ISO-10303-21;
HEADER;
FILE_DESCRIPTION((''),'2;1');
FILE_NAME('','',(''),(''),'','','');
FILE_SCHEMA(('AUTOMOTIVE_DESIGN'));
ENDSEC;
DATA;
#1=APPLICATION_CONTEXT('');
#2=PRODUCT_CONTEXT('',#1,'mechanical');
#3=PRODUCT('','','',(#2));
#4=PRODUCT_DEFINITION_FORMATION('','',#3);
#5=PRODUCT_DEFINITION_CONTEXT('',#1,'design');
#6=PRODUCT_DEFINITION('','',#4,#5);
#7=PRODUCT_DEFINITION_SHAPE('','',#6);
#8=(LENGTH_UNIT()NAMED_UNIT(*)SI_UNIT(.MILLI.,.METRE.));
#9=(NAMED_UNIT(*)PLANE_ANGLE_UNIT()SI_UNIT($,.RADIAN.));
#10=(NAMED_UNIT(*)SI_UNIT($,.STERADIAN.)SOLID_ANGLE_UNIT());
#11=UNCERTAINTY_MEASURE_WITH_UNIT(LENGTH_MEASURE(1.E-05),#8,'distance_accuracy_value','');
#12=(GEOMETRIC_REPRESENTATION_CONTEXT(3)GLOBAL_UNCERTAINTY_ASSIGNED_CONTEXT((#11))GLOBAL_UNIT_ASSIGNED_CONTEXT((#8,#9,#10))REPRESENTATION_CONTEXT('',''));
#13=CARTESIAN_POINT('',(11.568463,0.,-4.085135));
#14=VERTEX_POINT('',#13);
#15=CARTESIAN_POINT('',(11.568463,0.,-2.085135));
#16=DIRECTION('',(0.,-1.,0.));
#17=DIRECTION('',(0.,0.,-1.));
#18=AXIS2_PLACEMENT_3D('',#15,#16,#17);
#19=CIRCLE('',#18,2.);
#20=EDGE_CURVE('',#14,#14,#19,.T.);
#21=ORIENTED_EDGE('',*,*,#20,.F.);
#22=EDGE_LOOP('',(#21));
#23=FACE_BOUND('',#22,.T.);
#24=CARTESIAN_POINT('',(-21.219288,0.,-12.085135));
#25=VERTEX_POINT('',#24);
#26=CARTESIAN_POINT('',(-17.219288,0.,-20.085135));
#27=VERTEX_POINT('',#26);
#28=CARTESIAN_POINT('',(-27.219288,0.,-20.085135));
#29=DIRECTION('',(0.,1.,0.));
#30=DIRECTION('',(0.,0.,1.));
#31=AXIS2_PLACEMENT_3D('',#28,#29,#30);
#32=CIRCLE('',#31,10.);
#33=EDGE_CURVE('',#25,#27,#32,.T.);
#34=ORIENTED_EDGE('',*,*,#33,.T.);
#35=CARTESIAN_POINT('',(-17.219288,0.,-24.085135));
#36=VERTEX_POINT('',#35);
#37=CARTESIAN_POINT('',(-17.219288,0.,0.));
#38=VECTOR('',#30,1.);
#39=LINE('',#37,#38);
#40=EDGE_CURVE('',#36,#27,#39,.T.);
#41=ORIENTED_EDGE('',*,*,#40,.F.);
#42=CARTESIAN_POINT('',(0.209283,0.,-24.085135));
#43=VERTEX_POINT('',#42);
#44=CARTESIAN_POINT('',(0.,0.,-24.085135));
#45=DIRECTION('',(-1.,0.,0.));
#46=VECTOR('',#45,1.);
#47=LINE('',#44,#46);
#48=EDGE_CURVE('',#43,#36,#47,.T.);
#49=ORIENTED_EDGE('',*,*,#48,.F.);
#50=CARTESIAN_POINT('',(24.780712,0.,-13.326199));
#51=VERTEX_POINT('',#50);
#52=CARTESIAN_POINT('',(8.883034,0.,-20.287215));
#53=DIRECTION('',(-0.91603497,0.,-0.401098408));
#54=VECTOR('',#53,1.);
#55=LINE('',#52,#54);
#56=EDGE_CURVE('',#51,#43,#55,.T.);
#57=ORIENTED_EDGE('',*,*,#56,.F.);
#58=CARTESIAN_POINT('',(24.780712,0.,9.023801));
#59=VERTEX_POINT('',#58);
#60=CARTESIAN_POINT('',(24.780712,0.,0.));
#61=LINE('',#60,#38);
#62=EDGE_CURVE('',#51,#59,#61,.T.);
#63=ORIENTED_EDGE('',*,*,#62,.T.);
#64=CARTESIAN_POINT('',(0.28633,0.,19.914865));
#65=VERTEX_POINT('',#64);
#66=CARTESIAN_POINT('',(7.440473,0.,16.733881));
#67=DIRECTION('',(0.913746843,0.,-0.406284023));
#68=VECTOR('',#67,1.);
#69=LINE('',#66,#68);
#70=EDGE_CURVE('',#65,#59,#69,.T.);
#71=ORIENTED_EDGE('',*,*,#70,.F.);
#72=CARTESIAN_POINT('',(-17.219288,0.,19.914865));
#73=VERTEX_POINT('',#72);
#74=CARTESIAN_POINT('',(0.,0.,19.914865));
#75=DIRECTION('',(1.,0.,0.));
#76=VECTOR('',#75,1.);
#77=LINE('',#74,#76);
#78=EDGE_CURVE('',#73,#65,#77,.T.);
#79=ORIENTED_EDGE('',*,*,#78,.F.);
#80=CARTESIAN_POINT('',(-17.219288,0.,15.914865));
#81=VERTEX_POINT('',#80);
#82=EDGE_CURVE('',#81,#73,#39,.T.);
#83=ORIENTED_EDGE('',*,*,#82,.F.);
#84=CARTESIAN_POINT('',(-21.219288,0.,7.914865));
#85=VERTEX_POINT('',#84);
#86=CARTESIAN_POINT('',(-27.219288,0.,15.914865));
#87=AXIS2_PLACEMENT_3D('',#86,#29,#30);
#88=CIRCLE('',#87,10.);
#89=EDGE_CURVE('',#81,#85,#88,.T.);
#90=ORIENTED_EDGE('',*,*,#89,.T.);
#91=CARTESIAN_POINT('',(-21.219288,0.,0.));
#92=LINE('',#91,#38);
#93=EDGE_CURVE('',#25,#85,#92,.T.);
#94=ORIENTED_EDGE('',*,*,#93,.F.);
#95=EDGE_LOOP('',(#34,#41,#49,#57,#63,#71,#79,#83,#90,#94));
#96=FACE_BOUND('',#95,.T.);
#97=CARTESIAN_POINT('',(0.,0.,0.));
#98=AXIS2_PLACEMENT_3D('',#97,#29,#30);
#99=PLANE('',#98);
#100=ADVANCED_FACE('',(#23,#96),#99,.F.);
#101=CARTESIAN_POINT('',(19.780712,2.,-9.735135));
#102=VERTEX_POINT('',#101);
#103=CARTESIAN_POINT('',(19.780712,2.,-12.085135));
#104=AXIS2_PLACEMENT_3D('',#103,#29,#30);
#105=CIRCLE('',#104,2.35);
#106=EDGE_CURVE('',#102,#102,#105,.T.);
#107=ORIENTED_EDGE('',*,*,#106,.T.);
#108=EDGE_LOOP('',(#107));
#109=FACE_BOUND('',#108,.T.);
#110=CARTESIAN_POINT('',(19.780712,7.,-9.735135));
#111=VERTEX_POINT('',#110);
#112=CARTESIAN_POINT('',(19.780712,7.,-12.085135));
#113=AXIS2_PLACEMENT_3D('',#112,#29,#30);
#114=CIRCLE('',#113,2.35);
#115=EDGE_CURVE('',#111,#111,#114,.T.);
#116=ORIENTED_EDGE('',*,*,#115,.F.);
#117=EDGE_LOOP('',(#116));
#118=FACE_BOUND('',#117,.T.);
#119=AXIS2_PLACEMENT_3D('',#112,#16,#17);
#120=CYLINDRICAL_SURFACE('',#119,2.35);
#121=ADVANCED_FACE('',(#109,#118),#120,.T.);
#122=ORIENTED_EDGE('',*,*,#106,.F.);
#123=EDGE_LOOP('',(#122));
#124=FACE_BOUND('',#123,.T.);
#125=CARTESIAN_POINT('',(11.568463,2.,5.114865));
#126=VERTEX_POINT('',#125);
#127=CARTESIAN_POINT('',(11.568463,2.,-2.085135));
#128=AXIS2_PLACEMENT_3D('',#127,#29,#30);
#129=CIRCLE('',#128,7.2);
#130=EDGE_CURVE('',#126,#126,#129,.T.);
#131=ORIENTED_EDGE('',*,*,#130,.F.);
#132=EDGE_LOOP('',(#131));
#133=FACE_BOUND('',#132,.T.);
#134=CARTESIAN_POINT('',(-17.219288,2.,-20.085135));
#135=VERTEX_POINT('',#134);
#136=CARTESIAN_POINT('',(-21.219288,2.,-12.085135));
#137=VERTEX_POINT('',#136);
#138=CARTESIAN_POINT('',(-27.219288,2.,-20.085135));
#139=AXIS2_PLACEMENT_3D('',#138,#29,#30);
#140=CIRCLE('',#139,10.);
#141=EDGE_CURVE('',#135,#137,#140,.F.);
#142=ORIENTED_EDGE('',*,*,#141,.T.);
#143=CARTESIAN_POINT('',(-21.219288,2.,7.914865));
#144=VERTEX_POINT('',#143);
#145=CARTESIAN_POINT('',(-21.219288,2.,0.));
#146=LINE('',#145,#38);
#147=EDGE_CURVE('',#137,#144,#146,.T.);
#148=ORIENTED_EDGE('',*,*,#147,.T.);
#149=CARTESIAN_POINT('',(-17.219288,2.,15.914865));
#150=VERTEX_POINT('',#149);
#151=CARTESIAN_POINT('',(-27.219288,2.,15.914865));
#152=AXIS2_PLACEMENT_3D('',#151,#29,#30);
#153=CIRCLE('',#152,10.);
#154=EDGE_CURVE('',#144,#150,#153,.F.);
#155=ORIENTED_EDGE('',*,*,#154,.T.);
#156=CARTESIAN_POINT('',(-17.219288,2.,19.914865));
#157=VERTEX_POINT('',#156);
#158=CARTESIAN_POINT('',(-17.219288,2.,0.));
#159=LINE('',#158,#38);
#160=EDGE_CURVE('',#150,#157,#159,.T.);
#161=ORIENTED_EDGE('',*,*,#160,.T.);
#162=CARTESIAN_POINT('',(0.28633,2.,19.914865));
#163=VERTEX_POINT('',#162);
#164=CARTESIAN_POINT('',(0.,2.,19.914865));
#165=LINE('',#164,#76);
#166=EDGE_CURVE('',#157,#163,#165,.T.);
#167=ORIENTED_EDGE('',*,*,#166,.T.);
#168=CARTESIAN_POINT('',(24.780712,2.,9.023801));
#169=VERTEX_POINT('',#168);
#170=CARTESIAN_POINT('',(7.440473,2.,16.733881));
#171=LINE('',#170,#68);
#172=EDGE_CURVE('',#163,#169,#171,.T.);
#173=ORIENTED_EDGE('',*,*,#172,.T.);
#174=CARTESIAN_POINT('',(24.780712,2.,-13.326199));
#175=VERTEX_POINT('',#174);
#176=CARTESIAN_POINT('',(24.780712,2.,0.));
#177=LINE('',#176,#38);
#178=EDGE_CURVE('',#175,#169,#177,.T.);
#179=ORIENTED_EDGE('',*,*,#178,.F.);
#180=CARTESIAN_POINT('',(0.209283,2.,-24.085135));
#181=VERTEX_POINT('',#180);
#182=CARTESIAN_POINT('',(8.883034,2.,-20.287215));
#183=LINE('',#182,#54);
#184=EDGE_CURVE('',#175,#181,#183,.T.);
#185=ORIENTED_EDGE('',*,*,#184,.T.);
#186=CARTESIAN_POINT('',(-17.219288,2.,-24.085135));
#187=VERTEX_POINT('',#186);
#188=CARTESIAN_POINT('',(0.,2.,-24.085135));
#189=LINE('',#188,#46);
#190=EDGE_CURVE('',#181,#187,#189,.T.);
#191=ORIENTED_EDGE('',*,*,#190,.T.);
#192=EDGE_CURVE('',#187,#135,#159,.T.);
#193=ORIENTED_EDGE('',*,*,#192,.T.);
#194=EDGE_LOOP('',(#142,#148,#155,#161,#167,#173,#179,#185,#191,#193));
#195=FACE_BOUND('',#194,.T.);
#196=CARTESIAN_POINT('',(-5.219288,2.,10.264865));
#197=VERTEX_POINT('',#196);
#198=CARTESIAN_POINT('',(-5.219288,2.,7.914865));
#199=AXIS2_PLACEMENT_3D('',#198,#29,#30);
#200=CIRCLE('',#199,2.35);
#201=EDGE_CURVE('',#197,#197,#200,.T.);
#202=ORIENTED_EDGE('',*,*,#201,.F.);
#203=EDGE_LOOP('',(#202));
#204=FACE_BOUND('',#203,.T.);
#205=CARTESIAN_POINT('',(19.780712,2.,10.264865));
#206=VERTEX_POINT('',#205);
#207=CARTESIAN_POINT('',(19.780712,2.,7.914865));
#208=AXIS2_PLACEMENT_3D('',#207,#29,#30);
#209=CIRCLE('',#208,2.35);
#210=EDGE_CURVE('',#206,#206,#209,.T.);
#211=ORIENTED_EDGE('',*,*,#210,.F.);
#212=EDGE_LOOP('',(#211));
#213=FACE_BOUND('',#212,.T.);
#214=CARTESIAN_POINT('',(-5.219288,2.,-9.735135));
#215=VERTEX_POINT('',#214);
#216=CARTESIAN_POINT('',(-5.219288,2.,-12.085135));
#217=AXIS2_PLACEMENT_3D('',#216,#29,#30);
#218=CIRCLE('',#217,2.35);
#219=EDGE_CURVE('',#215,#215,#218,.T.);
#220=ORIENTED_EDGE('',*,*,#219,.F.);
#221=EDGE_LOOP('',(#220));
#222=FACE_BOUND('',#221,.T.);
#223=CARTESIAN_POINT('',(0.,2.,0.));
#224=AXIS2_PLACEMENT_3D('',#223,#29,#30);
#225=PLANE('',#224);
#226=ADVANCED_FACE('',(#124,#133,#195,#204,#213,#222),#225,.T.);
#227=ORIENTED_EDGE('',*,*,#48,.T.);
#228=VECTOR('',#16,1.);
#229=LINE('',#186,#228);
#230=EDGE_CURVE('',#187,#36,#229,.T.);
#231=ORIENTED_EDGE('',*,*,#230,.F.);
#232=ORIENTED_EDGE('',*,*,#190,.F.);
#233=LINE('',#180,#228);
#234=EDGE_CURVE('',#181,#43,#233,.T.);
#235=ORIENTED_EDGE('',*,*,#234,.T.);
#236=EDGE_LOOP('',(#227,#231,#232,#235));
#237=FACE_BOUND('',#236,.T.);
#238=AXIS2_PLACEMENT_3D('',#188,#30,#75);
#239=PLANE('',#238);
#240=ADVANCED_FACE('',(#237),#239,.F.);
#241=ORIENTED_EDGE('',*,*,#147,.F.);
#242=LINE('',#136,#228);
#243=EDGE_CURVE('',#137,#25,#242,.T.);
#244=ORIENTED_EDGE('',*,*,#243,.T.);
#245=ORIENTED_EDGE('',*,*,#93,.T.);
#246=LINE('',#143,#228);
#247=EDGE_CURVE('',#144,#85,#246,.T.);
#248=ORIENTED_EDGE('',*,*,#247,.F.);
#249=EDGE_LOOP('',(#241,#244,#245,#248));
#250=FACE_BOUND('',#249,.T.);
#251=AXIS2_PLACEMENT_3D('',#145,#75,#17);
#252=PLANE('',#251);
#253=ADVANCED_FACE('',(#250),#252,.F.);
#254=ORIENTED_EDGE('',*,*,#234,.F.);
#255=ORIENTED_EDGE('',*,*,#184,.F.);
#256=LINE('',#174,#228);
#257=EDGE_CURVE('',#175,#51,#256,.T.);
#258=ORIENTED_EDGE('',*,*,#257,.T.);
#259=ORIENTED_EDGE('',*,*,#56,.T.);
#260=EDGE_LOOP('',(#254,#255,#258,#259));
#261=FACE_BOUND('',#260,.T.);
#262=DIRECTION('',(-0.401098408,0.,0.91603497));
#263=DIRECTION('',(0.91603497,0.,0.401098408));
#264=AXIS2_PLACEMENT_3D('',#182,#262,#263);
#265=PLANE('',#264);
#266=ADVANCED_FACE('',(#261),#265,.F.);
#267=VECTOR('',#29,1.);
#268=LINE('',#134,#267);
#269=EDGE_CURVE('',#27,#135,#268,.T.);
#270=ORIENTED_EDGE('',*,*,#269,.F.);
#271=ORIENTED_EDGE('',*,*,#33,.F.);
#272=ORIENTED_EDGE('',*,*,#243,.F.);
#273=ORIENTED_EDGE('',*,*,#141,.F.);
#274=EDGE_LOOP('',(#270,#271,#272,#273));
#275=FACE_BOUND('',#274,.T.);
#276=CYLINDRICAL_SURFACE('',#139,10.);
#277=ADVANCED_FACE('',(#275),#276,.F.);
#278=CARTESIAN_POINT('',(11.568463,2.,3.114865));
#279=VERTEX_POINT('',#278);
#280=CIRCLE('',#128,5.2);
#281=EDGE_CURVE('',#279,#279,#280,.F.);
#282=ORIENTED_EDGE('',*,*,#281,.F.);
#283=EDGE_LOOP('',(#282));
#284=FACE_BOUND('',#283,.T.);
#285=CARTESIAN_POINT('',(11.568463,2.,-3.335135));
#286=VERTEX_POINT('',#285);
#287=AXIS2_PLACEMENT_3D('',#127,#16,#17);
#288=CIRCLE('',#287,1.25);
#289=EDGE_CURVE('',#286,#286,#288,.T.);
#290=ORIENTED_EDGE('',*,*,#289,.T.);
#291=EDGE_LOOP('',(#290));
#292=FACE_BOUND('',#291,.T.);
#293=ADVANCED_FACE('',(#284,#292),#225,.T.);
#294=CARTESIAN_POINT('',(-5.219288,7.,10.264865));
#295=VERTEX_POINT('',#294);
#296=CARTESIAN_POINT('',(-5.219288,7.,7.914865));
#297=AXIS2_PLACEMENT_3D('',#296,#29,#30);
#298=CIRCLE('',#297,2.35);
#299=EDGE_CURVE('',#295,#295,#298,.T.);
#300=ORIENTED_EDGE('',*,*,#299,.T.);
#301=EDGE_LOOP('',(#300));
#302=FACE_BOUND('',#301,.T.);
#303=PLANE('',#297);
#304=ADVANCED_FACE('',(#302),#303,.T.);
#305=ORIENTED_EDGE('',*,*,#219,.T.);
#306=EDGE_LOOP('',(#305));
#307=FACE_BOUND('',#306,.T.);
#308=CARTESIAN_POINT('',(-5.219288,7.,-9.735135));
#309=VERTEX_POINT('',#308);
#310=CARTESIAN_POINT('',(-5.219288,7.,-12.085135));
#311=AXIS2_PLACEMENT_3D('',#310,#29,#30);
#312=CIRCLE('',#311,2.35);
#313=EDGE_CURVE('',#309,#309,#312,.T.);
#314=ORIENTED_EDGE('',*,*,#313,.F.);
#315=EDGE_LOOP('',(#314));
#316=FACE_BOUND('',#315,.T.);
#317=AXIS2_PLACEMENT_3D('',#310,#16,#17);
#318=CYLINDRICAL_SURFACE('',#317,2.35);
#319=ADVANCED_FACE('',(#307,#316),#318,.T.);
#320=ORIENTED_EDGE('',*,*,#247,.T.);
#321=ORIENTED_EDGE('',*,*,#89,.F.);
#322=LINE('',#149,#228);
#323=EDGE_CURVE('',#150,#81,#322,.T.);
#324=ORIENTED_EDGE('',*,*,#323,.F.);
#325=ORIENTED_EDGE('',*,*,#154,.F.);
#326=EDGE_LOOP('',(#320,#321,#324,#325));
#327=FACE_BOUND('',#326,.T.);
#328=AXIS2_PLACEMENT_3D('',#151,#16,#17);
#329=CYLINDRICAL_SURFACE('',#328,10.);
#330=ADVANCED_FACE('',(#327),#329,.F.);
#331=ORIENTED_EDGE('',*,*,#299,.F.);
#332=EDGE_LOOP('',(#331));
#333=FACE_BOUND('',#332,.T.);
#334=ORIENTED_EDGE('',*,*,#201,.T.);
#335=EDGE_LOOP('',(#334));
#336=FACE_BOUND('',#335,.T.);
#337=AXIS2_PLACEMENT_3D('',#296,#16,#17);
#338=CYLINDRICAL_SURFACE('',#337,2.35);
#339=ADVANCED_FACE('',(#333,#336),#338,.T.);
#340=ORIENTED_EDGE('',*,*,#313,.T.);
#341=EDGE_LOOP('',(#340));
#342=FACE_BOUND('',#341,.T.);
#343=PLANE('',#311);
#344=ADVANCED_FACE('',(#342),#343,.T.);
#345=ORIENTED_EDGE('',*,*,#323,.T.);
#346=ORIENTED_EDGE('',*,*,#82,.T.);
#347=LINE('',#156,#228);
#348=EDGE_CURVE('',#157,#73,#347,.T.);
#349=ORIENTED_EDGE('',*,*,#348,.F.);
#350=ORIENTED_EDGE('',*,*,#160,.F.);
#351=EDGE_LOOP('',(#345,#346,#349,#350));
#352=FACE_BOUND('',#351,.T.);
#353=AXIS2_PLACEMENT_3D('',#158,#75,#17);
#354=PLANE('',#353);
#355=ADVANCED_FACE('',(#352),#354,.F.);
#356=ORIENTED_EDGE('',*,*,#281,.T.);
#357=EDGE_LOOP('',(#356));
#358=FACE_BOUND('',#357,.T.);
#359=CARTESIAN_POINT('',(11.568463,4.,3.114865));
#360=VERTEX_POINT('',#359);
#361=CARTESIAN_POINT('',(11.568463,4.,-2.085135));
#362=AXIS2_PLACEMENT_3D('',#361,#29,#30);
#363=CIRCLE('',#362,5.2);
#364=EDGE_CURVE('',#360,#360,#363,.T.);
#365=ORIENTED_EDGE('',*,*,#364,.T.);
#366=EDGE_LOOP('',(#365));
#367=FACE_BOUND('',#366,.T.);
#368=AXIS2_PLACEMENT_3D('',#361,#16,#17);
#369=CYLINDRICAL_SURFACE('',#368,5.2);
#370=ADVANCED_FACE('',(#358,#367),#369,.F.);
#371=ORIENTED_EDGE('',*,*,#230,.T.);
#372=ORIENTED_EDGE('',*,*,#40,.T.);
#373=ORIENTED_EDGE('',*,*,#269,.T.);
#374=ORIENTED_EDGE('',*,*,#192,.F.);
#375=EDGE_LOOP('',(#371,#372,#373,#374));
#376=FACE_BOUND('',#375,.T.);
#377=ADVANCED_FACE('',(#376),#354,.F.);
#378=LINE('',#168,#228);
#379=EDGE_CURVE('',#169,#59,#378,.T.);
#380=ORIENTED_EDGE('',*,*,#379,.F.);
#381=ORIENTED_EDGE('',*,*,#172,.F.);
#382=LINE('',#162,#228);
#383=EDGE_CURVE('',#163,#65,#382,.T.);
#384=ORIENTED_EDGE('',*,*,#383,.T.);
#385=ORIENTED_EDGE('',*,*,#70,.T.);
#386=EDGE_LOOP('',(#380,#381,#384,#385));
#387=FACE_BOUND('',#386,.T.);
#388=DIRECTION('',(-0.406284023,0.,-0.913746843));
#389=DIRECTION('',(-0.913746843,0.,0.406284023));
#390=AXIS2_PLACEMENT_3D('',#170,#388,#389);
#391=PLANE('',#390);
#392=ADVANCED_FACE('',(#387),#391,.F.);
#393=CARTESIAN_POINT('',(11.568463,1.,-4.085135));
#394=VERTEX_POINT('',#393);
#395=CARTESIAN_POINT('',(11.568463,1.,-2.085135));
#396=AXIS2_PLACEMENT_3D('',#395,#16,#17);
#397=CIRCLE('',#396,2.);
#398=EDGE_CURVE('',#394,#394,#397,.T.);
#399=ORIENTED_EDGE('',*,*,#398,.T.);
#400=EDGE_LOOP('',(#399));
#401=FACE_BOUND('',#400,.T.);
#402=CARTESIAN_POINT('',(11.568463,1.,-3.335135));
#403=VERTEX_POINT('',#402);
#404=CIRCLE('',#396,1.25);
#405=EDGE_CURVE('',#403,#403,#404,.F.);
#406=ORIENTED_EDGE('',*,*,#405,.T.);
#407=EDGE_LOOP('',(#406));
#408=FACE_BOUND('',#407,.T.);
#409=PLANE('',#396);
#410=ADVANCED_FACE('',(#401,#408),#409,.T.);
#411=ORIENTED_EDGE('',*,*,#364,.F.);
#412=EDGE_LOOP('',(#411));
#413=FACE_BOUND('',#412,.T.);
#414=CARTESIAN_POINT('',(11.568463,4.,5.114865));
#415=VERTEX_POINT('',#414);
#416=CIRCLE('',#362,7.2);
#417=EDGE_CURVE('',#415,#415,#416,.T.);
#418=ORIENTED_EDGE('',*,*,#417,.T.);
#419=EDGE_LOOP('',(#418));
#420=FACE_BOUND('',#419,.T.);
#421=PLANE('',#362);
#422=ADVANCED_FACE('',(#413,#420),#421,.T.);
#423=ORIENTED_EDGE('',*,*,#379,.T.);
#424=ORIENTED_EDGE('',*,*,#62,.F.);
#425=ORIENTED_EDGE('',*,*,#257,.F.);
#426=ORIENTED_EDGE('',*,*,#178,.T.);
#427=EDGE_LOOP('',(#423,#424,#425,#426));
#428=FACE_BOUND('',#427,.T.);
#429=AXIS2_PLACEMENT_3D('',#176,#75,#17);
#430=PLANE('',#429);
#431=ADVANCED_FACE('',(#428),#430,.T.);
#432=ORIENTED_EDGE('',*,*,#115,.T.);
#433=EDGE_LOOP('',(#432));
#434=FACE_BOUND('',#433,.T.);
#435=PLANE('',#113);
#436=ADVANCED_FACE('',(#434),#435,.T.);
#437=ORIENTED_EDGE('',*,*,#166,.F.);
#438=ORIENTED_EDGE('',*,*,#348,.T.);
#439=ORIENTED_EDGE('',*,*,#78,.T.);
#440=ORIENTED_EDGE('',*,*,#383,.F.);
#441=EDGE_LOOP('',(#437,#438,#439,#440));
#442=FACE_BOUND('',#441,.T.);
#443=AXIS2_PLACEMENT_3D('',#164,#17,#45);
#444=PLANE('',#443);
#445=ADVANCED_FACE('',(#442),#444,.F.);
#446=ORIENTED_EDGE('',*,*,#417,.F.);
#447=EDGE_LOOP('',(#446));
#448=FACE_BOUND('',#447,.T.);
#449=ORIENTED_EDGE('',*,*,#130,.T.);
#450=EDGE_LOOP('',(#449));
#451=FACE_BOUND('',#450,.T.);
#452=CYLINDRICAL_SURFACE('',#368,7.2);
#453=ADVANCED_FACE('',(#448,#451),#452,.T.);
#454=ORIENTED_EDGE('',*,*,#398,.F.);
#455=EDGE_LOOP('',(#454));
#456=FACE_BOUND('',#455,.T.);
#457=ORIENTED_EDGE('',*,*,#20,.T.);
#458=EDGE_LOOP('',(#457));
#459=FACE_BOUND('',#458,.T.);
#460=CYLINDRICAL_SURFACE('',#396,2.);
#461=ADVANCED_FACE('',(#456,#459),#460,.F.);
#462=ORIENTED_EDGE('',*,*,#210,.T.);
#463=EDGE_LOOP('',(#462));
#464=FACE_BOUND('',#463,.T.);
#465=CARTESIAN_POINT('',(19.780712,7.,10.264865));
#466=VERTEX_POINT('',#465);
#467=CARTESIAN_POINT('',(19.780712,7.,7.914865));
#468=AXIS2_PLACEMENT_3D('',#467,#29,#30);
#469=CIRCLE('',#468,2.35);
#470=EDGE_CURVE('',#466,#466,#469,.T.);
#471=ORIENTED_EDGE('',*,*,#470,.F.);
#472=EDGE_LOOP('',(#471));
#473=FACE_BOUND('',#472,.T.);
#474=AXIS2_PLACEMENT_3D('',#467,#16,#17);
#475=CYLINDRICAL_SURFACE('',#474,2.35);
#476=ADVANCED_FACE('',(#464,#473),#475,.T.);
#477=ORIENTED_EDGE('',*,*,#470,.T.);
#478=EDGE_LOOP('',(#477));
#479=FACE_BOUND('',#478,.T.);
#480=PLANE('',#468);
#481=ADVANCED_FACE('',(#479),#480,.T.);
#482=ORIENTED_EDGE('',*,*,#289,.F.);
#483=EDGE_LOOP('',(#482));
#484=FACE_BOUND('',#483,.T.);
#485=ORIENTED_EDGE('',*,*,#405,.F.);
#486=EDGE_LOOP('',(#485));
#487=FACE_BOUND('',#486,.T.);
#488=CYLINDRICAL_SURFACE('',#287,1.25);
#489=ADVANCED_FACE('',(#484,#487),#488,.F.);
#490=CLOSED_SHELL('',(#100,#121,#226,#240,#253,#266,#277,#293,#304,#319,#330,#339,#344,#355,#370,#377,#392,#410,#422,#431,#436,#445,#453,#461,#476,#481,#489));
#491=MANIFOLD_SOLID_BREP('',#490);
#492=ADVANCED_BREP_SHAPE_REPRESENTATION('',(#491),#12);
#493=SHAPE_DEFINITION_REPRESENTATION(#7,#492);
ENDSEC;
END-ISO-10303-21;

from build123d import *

# Parameters (mm, degrees)
BOSS_EXTRUDE2_DEPTH = 2
FILLET1_R           = 10
SKETCH3_R           = 7.2
SKETCH3_R_2         = 5.2
BOSS_EXTRUDE3_DEPTH = 2
SKETCH4_R           = 1.25
CUT_EXTRUDE1_DEPTH  = 2
SKETCH5_R           = 2
CUT_EXTRUDE2_DEPTH  = 1
SKETCH6_R           = 2.35
BOSS_EXTRUDE4_DEPTH = 5


with BuildPart() as part:
    # Sketch1 → Boss-Extrude2 (new body)
    with BuildSketch(Plane(origin=(0, 0, 0), x_dir=(1, 0, 0), z_dir=(0, 1, 0))):
        Polygon((-17.219288225, -19.914865419), (0.286329753, -19.914865419), (24.780711775, -9.023800613), (24.780711775, 13.326199387), (0.209283204, 24.085134581), (-17.219288225, 24.085134581), (-17.219288225, 12.085134581), (-21.219288225, 12.085134581), (-21.219288225, -7.914865419), (-17.219288225, -7.914865419), align=None)
    extrude(amount=BOSS_EXTRUDE2_DEPTH)

    # Fillet1
    # the kernel refuses this fillet: 10 mm, written as the material it adds along each edge
    with BuildSketch(Plane(origin=(-17.219288225, 0, 7.914865419), x_dir=(-1, 0, 0), z_dir=(0, 1, 0))) as fillet1_piece_1:
        with BuildLine():
            CenterArc((10, 8), FILLET1_R, 180, 53.130102354)
            Line((0, 8), (-0.2, 8))
            Line((-0.2, 8), (-0.2, 0))
            Line((-0.2, 0), (0, -0.2))
            ThreePointArc((0, -0.2), (2, -0.2), (3.88, -0.16))
            Line((3.88, -0.16), (4, 0))
        make_face()
    extrude(amount=2)
    with BuildSketch(Plane(origin=(-17.219288225, 0, -12.085134581), x_dir=(0, 0, -1), z_dir=(0, 1, 0))) as fillet1_piece_2:
        with BuildLine():
            CenterArc((8, 10), FILLET1_R, 216.869897646, 53.130102354)
            Line((0, 4), (-0.16, 3.88))
            ThreePointArc((-0.16, 3.88), (-0.2, 2), (-0.2, 0))
            Line((-0.2, 0), (0, -0.2))
            Line((0, -0.2), (8, -0.2))
            Line((8, -0.2), (8, 0))
        make_face()
    extrude(amount=2)

    # Sketch3 → Boss-Extrude3 (add)
    with BuildSketch(Plane(origin=(0, 2, 0), x_dir=(1, 0, 0), z_dir=(0, 1, 0))):
        with Locations(Location((11.568463112, 2.085134581, 0), (0, 0, 270))):
            Circle(SKETCH3_R)
        with Locations(Location((11.568463112, 2.085134581, 0), (0, 0, 270))):
            Circle(SKETCH3_R_2, mode=Mode.SUBTRACT)
    extrude(amount=BOSS_EXTRUDE3_DEPTH)

    # Sketch4 → Cut-Extrude1 (cut)
    with BuildSketch(Plane.XZ):
        with Locations(Location((11.568463112, -2.085134581, 0), (0, 0, 270))):
            Circle(SKETCH4_R)
    extrude(amount=-CUT_EXTRUDE1_DEPTH, mode=Mode.SUBTRACT)

    # Sketch5 → Cut-Extrude2 (cut)
    with BuildSketch(Plane.XZ):
        with Locations(Location((11.568463112, -2.085134581, 0), (0, 0, 270))):
            Circle(SKETCH5_R)
    extrude(amount=-CUT_EXTRUDE2_DEPTH, mode=Mode.SUBTRACT)

    # Sketch6 → Boss-Extrude4 (add)
    with BuildSketch(Plane(origin=(0, 2, 0), x_dir=(1, 0, 0), z_dir=(0, 1, 0))):
        with Locations(Location((19.780711775, -7.914865419, 0), (0, 0, 270))):
            Circle(SKETCH6_R)
        with Locations(Location((19.780711775, 12.085134581, 0), (0, 0, 270))):
            Circle(SKETCH6_R)
        with Locations(Location((-5.219288225, -7.914865419, 0), (0, 0, 270))):
            Circle(SKETCH6_R)
        with Locations(Location((-5.219288225, 12.085134581, 0), (0, 0, 270))):
            Circle(SKETCH6_R)
    extrude(amount=BOSS_EXTRUDE4_DEPTH)


solid = part.part
